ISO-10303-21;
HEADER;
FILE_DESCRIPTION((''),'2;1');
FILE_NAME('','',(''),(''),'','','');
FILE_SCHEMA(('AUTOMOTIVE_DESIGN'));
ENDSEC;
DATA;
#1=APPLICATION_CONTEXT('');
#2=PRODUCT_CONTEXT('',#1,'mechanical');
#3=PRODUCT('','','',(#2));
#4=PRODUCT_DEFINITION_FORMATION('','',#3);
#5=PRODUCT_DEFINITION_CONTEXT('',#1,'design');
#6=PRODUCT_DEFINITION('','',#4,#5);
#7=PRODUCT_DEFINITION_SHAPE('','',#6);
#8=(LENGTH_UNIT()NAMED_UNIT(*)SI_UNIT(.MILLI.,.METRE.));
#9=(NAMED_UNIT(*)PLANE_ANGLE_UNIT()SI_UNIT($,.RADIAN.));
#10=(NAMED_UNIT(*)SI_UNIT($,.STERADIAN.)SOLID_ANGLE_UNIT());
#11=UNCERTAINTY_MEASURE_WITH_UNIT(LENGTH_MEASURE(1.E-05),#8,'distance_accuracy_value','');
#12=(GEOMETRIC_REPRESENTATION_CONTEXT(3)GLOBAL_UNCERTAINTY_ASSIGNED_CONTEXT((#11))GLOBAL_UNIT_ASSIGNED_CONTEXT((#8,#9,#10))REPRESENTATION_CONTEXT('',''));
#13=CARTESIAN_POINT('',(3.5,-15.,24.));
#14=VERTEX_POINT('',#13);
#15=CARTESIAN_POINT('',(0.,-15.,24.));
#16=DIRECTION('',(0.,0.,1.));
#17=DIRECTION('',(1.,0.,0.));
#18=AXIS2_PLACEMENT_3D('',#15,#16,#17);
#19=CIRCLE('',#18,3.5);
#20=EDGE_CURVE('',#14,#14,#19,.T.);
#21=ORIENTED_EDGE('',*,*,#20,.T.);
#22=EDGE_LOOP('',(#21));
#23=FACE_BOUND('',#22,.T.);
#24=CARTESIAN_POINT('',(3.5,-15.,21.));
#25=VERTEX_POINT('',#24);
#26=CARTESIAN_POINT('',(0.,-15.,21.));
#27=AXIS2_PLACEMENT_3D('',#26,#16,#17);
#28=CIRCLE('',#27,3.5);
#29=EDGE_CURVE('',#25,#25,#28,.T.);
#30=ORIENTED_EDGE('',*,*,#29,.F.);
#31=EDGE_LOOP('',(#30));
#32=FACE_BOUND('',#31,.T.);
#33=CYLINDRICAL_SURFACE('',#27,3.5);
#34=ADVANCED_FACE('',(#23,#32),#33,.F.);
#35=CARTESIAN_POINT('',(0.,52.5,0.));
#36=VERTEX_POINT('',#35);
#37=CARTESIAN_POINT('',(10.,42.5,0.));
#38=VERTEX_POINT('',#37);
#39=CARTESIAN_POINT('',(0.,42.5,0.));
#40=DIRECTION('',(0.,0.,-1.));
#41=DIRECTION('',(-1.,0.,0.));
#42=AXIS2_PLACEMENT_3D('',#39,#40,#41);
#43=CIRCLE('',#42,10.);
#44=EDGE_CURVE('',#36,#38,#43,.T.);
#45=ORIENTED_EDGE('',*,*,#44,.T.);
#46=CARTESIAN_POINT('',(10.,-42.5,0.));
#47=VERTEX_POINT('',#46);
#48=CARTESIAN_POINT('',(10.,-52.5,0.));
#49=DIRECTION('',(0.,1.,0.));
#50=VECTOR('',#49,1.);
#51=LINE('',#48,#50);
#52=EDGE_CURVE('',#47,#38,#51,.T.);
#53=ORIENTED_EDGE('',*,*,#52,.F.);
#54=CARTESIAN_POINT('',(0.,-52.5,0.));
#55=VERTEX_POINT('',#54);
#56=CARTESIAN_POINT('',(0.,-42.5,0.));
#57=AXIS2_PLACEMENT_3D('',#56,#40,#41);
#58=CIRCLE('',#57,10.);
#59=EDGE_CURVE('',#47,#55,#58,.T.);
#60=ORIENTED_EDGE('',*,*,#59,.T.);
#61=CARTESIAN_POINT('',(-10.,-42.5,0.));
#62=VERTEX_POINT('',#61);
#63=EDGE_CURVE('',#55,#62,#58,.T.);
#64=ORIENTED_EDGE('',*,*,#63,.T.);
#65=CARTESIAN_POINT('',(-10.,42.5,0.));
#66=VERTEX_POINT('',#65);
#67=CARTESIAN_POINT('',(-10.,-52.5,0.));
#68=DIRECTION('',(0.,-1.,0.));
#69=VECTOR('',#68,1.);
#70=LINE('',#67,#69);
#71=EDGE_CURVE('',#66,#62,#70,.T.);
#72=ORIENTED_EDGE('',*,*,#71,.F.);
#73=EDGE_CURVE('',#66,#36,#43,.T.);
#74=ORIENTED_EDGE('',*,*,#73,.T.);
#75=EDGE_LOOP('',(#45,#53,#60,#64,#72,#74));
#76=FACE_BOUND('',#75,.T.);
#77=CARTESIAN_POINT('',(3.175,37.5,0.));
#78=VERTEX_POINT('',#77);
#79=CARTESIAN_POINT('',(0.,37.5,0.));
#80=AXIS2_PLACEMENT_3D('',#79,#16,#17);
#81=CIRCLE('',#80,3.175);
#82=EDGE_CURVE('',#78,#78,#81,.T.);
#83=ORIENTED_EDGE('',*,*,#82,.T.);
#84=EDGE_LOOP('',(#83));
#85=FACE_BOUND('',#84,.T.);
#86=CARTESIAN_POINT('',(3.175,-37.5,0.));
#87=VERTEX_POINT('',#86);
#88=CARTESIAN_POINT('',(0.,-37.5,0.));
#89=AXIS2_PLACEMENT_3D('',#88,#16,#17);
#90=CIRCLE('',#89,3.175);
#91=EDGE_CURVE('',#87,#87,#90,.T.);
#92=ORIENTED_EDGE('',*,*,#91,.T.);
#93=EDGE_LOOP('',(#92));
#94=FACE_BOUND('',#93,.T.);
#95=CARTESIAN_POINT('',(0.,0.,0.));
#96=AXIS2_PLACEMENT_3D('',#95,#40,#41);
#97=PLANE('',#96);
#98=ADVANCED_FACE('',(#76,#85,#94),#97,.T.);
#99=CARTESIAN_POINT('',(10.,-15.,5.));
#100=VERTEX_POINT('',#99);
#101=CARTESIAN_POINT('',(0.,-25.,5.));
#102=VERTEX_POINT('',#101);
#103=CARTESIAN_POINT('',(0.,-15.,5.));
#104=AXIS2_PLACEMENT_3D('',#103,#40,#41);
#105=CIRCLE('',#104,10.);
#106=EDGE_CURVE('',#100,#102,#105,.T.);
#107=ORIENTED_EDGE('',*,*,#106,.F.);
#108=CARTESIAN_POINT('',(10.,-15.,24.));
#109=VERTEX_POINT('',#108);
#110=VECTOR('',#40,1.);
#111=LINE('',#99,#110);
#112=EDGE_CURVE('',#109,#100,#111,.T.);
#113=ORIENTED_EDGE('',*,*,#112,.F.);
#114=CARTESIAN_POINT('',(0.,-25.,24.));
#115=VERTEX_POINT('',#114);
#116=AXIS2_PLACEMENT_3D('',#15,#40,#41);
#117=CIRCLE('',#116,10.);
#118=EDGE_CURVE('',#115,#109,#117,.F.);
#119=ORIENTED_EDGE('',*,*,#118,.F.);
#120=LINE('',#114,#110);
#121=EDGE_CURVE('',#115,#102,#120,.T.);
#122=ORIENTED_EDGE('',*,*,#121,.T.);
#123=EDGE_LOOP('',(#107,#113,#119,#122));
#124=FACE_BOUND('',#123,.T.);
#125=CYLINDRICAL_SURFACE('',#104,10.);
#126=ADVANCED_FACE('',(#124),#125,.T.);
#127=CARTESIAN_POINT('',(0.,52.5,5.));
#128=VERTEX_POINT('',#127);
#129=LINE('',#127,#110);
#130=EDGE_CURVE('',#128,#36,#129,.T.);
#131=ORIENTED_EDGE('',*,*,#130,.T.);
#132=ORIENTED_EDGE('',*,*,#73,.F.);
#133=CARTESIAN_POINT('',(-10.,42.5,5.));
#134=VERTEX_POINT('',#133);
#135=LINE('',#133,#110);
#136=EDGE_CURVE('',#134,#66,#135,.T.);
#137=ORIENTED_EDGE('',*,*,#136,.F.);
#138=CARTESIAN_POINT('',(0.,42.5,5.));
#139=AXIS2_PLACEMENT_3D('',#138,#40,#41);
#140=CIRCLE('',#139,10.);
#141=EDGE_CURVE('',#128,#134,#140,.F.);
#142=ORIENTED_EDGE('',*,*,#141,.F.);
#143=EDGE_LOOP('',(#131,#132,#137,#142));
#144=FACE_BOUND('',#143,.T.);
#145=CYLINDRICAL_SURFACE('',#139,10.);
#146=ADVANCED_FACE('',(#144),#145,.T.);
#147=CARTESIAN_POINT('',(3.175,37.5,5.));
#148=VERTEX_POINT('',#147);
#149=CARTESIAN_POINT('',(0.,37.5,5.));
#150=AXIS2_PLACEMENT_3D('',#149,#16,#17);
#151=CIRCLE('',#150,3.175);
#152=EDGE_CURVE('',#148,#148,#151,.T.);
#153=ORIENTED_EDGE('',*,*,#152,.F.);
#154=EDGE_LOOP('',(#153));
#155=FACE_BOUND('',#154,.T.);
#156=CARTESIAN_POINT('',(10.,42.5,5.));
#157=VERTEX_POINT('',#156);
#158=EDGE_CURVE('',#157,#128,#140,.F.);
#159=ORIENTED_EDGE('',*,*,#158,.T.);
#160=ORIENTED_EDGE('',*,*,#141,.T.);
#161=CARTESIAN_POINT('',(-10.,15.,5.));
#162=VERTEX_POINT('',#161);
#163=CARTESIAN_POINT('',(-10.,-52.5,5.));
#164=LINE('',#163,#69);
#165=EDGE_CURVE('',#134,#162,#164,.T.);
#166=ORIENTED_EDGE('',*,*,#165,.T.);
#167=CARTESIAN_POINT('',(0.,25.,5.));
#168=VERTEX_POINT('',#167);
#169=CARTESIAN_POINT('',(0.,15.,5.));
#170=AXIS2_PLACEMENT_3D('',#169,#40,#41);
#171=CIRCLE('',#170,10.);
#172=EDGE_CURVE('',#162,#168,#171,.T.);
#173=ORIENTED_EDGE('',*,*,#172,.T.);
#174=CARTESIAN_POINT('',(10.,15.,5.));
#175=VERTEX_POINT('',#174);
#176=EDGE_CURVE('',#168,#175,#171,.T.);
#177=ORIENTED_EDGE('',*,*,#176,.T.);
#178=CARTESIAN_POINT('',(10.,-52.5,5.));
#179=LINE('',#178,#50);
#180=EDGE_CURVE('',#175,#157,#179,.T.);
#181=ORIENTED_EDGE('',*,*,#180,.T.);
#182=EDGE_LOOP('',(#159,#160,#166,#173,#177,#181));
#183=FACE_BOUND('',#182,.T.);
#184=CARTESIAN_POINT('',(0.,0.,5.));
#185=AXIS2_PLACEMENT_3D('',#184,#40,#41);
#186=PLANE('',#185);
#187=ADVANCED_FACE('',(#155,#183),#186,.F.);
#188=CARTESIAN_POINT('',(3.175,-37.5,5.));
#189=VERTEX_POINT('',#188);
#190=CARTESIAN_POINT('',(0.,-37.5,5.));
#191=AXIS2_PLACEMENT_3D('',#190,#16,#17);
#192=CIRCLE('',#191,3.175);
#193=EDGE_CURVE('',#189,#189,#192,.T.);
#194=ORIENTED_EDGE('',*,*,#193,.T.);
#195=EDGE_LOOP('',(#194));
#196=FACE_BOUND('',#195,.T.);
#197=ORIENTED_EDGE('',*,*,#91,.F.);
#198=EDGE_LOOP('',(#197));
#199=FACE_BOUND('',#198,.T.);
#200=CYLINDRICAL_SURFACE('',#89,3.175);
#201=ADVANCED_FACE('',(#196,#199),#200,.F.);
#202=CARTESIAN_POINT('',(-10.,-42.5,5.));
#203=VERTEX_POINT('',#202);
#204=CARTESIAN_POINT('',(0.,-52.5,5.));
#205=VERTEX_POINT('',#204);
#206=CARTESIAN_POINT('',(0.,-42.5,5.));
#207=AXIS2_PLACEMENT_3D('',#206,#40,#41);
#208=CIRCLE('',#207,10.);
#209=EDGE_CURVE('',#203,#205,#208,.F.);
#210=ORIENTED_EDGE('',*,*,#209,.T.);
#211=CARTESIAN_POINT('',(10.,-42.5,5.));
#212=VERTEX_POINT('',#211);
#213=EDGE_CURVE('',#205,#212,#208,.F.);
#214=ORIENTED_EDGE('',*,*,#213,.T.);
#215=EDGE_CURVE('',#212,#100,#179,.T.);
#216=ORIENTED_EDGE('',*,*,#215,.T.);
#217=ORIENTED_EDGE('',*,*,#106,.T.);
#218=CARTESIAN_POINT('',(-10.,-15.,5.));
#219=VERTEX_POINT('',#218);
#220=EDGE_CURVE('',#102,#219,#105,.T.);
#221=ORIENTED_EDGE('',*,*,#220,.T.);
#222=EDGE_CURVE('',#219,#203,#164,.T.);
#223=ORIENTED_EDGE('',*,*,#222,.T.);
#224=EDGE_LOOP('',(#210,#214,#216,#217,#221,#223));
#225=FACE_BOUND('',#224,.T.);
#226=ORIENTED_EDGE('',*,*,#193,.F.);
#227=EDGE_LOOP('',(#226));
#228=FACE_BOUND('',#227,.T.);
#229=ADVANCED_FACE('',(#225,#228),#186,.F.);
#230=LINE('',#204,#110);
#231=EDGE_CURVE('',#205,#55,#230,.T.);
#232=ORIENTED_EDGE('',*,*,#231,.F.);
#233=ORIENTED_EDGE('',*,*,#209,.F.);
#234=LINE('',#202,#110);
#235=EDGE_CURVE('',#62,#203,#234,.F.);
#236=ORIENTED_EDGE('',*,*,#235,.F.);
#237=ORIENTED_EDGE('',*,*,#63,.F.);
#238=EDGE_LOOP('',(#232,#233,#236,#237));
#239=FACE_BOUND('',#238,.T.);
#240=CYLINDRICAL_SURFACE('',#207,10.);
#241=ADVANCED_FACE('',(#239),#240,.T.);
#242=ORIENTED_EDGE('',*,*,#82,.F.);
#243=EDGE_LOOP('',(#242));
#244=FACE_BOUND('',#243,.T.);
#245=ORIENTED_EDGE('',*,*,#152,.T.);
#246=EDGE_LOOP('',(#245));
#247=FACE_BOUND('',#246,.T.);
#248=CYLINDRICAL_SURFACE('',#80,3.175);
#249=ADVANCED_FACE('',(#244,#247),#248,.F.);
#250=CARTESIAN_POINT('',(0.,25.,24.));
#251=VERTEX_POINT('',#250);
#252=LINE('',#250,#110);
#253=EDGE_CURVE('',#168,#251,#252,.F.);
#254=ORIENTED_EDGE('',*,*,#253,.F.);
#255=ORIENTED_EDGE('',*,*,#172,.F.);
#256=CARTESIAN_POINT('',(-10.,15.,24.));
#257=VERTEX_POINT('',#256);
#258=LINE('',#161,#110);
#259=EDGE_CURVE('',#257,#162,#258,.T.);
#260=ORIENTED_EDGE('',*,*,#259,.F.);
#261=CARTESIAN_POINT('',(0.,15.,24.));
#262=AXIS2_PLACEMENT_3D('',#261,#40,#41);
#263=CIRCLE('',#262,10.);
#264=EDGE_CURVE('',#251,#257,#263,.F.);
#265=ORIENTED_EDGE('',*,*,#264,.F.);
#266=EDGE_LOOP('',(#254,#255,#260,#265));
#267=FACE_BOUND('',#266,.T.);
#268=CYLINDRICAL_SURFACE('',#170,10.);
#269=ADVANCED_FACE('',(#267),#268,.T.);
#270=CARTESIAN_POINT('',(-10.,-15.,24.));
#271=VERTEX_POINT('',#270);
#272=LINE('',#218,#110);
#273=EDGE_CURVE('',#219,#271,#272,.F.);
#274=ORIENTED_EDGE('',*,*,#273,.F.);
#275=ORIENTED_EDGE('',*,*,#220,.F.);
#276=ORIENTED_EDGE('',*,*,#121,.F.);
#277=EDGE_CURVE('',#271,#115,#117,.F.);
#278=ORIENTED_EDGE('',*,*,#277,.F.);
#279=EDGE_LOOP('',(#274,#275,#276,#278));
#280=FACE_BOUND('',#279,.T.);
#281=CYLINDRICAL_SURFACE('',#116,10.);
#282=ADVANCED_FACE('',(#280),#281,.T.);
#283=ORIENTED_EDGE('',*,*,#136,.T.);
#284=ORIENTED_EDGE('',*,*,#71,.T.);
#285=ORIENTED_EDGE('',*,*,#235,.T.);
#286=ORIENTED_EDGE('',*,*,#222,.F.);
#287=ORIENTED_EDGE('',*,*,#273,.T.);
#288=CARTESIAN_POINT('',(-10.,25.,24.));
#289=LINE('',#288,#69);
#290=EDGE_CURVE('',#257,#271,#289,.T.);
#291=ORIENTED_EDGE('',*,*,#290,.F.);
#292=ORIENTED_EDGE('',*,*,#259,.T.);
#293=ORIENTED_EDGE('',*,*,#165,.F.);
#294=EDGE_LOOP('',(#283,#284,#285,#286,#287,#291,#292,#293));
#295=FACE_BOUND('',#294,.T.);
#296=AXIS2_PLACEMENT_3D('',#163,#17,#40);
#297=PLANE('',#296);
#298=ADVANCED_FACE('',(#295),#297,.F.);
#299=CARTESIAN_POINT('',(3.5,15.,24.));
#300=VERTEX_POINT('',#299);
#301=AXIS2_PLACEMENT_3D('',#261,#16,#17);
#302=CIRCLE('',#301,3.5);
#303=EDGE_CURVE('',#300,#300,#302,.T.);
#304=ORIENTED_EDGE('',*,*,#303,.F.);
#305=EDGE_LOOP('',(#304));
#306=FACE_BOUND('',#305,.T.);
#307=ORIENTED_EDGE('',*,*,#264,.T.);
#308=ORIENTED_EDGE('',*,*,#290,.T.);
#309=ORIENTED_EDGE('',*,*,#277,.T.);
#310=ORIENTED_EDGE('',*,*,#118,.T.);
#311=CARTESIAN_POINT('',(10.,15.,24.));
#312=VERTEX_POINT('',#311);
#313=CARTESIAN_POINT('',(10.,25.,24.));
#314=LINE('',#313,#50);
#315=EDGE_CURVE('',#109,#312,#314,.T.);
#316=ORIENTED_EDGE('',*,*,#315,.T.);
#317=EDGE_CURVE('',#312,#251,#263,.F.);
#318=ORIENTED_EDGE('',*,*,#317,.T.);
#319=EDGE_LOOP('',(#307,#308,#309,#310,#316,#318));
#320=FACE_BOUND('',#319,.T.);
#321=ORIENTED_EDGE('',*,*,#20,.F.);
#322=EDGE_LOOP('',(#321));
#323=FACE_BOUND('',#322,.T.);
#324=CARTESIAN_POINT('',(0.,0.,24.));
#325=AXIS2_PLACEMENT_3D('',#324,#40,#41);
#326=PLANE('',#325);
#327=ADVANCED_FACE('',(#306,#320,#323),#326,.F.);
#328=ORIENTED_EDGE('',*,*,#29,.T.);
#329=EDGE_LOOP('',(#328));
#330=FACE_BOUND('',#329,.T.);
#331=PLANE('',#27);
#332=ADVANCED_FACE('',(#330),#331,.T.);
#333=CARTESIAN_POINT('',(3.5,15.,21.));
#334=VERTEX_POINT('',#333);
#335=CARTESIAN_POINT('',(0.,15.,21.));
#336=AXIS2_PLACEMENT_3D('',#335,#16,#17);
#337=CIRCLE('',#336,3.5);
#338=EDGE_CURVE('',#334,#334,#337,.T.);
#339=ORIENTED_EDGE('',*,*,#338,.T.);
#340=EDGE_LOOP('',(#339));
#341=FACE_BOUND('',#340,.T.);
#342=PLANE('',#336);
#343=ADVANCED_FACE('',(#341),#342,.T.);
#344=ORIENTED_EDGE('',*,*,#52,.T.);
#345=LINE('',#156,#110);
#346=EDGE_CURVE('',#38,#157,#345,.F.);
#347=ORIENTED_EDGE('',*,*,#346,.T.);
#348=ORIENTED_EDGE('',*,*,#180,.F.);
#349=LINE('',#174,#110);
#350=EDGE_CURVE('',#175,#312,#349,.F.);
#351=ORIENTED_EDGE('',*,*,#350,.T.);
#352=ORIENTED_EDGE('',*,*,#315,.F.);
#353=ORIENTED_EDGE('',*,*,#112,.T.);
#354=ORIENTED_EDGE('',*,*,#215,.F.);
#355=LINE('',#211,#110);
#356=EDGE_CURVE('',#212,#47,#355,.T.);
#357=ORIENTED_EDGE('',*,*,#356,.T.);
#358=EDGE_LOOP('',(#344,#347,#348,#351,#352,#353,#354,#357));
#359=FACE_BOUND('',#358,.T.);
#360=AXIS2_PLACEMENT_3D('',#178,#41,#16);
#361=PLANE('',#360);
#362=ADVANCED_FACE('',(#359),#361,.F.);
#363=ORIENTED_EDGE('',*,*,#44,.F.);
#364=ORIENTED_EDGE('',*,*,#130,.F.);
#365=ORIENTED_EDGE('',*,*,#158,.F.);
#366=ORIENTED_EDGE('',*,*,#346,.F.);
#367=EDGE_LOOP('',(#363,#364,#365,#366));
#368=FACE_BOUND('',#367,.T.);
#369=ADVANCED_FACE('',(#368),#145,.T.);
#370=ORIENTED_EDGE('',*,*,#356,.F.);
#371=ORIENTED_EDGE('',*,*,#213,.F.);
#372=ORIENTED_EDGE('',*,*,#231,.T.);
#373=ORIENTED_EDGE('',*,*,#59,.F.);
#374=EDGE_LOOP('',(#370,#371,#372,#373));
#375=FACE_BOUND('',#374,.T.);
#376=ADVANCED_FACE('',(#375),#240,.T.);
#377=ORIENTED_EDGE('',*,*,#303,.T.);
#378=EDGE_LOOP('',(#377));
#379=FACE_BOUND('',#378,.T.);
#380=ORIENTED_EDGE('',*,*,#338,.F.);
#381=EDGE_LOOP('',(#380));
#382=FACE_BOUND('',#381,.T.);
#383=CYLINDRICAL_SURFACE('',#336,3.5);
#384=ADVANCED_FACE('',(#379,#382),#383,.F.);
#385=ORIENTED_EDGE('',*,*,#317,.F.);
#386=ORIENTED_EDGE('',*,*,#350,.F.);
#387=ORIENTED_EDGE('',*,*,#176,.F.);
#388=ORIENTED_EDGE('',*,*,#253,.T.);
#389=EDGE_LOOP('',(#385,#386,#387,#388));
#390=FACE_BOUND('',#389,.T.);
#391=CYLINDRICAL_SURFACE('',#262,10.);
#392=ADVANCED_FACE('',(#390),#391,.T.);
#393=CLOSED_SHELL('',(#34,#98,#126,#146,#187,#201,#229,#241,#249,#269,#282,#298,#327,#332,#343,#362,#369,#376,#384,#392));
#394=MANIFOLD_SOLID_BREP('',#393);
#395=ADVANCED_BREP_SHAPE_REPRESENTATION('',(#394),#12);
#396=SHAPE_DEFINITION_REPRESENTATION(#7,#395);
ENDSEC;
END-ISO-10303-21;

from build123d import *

# Parameters (mm, degrees)
SKETCH1_W           = 20
SKETCH1_H           = 105
BOSS_EXTRUDE1_DEPTH = 5
SKETCH2_R           = 3.175
CUT_EXTRUDE1_DEPTH  = 54.677276384
SKETCH4_W           = 20
SKETCH4_H           = 50
BOSS_EXTRUDE3_DEPTH = 19
SKETCH5_R           = 3.5
CUT_EXTRUDE2_DEPTH  = 3
FILLET5_R           = 10


with BuildPart() as part:
    # Sketch1 → Boss-Extrude1 (new body)
    with BuildSketch(Plane.XY):
        Rectangle(SKETCH1_W, SKETCH1_H)
    extrude(amount=BOSS_EXTRUDE1_DEPTH)

    # Sketch2 → Cut-Extrude1 (cut, through all)
    with BuildSketch(Plane.XY.offset(5)):
        with Locations((0, 37.5)):
            Circle(SKETCH2_R)
        with Locations((0, -37.5)):
            Circle(SKETCH2_R)
    extrude(amount=-CUT_EXTRUDE1_DEPTH, mode=Mode.SUBTRACT)

    # Sketch4 → Boss-Extrude3 (add)
    with BuildSketch(Plane.XY.offset(5)):
        Rectangle(SKETCH4_W, SKETCH4_H)
    extrude(amount=BOSS_EXTRUDE3_DEPTH)

    # Sketch5 → Cut-Extrude2 (cut)
    with BuildSketch(Plane.XY.offset(24)):
        with Locations((0, -15)):
            Circle(SKETCH5_R)
        with Locations((0, 15)):
            Circle(SKETCH5_R)
    extrude(amount=-CUT_EXTRUDE2_DEPTH, mode=Mode.SUBTRACT)

    # Fillet5
    fillet5_edges = [part.edges().sort_by_distance(p)[0] for p in [
        (10, -52.5, 2.5),
        (-10, -52.5, 2.5),
        (10, -25, 14.5),
        (-10, -25, 14.5),
        (10, 25, 14.5),
        (-10, 25, 14.5),
        (-10, 52.5, 2.5),
        (10, 52.5, 2.5),
    ]]
    fillet(fillet5_edges, radius=FILLET5_R - 0.0001)  # a hair under: the kernel refuses the full size


solid = part.part
